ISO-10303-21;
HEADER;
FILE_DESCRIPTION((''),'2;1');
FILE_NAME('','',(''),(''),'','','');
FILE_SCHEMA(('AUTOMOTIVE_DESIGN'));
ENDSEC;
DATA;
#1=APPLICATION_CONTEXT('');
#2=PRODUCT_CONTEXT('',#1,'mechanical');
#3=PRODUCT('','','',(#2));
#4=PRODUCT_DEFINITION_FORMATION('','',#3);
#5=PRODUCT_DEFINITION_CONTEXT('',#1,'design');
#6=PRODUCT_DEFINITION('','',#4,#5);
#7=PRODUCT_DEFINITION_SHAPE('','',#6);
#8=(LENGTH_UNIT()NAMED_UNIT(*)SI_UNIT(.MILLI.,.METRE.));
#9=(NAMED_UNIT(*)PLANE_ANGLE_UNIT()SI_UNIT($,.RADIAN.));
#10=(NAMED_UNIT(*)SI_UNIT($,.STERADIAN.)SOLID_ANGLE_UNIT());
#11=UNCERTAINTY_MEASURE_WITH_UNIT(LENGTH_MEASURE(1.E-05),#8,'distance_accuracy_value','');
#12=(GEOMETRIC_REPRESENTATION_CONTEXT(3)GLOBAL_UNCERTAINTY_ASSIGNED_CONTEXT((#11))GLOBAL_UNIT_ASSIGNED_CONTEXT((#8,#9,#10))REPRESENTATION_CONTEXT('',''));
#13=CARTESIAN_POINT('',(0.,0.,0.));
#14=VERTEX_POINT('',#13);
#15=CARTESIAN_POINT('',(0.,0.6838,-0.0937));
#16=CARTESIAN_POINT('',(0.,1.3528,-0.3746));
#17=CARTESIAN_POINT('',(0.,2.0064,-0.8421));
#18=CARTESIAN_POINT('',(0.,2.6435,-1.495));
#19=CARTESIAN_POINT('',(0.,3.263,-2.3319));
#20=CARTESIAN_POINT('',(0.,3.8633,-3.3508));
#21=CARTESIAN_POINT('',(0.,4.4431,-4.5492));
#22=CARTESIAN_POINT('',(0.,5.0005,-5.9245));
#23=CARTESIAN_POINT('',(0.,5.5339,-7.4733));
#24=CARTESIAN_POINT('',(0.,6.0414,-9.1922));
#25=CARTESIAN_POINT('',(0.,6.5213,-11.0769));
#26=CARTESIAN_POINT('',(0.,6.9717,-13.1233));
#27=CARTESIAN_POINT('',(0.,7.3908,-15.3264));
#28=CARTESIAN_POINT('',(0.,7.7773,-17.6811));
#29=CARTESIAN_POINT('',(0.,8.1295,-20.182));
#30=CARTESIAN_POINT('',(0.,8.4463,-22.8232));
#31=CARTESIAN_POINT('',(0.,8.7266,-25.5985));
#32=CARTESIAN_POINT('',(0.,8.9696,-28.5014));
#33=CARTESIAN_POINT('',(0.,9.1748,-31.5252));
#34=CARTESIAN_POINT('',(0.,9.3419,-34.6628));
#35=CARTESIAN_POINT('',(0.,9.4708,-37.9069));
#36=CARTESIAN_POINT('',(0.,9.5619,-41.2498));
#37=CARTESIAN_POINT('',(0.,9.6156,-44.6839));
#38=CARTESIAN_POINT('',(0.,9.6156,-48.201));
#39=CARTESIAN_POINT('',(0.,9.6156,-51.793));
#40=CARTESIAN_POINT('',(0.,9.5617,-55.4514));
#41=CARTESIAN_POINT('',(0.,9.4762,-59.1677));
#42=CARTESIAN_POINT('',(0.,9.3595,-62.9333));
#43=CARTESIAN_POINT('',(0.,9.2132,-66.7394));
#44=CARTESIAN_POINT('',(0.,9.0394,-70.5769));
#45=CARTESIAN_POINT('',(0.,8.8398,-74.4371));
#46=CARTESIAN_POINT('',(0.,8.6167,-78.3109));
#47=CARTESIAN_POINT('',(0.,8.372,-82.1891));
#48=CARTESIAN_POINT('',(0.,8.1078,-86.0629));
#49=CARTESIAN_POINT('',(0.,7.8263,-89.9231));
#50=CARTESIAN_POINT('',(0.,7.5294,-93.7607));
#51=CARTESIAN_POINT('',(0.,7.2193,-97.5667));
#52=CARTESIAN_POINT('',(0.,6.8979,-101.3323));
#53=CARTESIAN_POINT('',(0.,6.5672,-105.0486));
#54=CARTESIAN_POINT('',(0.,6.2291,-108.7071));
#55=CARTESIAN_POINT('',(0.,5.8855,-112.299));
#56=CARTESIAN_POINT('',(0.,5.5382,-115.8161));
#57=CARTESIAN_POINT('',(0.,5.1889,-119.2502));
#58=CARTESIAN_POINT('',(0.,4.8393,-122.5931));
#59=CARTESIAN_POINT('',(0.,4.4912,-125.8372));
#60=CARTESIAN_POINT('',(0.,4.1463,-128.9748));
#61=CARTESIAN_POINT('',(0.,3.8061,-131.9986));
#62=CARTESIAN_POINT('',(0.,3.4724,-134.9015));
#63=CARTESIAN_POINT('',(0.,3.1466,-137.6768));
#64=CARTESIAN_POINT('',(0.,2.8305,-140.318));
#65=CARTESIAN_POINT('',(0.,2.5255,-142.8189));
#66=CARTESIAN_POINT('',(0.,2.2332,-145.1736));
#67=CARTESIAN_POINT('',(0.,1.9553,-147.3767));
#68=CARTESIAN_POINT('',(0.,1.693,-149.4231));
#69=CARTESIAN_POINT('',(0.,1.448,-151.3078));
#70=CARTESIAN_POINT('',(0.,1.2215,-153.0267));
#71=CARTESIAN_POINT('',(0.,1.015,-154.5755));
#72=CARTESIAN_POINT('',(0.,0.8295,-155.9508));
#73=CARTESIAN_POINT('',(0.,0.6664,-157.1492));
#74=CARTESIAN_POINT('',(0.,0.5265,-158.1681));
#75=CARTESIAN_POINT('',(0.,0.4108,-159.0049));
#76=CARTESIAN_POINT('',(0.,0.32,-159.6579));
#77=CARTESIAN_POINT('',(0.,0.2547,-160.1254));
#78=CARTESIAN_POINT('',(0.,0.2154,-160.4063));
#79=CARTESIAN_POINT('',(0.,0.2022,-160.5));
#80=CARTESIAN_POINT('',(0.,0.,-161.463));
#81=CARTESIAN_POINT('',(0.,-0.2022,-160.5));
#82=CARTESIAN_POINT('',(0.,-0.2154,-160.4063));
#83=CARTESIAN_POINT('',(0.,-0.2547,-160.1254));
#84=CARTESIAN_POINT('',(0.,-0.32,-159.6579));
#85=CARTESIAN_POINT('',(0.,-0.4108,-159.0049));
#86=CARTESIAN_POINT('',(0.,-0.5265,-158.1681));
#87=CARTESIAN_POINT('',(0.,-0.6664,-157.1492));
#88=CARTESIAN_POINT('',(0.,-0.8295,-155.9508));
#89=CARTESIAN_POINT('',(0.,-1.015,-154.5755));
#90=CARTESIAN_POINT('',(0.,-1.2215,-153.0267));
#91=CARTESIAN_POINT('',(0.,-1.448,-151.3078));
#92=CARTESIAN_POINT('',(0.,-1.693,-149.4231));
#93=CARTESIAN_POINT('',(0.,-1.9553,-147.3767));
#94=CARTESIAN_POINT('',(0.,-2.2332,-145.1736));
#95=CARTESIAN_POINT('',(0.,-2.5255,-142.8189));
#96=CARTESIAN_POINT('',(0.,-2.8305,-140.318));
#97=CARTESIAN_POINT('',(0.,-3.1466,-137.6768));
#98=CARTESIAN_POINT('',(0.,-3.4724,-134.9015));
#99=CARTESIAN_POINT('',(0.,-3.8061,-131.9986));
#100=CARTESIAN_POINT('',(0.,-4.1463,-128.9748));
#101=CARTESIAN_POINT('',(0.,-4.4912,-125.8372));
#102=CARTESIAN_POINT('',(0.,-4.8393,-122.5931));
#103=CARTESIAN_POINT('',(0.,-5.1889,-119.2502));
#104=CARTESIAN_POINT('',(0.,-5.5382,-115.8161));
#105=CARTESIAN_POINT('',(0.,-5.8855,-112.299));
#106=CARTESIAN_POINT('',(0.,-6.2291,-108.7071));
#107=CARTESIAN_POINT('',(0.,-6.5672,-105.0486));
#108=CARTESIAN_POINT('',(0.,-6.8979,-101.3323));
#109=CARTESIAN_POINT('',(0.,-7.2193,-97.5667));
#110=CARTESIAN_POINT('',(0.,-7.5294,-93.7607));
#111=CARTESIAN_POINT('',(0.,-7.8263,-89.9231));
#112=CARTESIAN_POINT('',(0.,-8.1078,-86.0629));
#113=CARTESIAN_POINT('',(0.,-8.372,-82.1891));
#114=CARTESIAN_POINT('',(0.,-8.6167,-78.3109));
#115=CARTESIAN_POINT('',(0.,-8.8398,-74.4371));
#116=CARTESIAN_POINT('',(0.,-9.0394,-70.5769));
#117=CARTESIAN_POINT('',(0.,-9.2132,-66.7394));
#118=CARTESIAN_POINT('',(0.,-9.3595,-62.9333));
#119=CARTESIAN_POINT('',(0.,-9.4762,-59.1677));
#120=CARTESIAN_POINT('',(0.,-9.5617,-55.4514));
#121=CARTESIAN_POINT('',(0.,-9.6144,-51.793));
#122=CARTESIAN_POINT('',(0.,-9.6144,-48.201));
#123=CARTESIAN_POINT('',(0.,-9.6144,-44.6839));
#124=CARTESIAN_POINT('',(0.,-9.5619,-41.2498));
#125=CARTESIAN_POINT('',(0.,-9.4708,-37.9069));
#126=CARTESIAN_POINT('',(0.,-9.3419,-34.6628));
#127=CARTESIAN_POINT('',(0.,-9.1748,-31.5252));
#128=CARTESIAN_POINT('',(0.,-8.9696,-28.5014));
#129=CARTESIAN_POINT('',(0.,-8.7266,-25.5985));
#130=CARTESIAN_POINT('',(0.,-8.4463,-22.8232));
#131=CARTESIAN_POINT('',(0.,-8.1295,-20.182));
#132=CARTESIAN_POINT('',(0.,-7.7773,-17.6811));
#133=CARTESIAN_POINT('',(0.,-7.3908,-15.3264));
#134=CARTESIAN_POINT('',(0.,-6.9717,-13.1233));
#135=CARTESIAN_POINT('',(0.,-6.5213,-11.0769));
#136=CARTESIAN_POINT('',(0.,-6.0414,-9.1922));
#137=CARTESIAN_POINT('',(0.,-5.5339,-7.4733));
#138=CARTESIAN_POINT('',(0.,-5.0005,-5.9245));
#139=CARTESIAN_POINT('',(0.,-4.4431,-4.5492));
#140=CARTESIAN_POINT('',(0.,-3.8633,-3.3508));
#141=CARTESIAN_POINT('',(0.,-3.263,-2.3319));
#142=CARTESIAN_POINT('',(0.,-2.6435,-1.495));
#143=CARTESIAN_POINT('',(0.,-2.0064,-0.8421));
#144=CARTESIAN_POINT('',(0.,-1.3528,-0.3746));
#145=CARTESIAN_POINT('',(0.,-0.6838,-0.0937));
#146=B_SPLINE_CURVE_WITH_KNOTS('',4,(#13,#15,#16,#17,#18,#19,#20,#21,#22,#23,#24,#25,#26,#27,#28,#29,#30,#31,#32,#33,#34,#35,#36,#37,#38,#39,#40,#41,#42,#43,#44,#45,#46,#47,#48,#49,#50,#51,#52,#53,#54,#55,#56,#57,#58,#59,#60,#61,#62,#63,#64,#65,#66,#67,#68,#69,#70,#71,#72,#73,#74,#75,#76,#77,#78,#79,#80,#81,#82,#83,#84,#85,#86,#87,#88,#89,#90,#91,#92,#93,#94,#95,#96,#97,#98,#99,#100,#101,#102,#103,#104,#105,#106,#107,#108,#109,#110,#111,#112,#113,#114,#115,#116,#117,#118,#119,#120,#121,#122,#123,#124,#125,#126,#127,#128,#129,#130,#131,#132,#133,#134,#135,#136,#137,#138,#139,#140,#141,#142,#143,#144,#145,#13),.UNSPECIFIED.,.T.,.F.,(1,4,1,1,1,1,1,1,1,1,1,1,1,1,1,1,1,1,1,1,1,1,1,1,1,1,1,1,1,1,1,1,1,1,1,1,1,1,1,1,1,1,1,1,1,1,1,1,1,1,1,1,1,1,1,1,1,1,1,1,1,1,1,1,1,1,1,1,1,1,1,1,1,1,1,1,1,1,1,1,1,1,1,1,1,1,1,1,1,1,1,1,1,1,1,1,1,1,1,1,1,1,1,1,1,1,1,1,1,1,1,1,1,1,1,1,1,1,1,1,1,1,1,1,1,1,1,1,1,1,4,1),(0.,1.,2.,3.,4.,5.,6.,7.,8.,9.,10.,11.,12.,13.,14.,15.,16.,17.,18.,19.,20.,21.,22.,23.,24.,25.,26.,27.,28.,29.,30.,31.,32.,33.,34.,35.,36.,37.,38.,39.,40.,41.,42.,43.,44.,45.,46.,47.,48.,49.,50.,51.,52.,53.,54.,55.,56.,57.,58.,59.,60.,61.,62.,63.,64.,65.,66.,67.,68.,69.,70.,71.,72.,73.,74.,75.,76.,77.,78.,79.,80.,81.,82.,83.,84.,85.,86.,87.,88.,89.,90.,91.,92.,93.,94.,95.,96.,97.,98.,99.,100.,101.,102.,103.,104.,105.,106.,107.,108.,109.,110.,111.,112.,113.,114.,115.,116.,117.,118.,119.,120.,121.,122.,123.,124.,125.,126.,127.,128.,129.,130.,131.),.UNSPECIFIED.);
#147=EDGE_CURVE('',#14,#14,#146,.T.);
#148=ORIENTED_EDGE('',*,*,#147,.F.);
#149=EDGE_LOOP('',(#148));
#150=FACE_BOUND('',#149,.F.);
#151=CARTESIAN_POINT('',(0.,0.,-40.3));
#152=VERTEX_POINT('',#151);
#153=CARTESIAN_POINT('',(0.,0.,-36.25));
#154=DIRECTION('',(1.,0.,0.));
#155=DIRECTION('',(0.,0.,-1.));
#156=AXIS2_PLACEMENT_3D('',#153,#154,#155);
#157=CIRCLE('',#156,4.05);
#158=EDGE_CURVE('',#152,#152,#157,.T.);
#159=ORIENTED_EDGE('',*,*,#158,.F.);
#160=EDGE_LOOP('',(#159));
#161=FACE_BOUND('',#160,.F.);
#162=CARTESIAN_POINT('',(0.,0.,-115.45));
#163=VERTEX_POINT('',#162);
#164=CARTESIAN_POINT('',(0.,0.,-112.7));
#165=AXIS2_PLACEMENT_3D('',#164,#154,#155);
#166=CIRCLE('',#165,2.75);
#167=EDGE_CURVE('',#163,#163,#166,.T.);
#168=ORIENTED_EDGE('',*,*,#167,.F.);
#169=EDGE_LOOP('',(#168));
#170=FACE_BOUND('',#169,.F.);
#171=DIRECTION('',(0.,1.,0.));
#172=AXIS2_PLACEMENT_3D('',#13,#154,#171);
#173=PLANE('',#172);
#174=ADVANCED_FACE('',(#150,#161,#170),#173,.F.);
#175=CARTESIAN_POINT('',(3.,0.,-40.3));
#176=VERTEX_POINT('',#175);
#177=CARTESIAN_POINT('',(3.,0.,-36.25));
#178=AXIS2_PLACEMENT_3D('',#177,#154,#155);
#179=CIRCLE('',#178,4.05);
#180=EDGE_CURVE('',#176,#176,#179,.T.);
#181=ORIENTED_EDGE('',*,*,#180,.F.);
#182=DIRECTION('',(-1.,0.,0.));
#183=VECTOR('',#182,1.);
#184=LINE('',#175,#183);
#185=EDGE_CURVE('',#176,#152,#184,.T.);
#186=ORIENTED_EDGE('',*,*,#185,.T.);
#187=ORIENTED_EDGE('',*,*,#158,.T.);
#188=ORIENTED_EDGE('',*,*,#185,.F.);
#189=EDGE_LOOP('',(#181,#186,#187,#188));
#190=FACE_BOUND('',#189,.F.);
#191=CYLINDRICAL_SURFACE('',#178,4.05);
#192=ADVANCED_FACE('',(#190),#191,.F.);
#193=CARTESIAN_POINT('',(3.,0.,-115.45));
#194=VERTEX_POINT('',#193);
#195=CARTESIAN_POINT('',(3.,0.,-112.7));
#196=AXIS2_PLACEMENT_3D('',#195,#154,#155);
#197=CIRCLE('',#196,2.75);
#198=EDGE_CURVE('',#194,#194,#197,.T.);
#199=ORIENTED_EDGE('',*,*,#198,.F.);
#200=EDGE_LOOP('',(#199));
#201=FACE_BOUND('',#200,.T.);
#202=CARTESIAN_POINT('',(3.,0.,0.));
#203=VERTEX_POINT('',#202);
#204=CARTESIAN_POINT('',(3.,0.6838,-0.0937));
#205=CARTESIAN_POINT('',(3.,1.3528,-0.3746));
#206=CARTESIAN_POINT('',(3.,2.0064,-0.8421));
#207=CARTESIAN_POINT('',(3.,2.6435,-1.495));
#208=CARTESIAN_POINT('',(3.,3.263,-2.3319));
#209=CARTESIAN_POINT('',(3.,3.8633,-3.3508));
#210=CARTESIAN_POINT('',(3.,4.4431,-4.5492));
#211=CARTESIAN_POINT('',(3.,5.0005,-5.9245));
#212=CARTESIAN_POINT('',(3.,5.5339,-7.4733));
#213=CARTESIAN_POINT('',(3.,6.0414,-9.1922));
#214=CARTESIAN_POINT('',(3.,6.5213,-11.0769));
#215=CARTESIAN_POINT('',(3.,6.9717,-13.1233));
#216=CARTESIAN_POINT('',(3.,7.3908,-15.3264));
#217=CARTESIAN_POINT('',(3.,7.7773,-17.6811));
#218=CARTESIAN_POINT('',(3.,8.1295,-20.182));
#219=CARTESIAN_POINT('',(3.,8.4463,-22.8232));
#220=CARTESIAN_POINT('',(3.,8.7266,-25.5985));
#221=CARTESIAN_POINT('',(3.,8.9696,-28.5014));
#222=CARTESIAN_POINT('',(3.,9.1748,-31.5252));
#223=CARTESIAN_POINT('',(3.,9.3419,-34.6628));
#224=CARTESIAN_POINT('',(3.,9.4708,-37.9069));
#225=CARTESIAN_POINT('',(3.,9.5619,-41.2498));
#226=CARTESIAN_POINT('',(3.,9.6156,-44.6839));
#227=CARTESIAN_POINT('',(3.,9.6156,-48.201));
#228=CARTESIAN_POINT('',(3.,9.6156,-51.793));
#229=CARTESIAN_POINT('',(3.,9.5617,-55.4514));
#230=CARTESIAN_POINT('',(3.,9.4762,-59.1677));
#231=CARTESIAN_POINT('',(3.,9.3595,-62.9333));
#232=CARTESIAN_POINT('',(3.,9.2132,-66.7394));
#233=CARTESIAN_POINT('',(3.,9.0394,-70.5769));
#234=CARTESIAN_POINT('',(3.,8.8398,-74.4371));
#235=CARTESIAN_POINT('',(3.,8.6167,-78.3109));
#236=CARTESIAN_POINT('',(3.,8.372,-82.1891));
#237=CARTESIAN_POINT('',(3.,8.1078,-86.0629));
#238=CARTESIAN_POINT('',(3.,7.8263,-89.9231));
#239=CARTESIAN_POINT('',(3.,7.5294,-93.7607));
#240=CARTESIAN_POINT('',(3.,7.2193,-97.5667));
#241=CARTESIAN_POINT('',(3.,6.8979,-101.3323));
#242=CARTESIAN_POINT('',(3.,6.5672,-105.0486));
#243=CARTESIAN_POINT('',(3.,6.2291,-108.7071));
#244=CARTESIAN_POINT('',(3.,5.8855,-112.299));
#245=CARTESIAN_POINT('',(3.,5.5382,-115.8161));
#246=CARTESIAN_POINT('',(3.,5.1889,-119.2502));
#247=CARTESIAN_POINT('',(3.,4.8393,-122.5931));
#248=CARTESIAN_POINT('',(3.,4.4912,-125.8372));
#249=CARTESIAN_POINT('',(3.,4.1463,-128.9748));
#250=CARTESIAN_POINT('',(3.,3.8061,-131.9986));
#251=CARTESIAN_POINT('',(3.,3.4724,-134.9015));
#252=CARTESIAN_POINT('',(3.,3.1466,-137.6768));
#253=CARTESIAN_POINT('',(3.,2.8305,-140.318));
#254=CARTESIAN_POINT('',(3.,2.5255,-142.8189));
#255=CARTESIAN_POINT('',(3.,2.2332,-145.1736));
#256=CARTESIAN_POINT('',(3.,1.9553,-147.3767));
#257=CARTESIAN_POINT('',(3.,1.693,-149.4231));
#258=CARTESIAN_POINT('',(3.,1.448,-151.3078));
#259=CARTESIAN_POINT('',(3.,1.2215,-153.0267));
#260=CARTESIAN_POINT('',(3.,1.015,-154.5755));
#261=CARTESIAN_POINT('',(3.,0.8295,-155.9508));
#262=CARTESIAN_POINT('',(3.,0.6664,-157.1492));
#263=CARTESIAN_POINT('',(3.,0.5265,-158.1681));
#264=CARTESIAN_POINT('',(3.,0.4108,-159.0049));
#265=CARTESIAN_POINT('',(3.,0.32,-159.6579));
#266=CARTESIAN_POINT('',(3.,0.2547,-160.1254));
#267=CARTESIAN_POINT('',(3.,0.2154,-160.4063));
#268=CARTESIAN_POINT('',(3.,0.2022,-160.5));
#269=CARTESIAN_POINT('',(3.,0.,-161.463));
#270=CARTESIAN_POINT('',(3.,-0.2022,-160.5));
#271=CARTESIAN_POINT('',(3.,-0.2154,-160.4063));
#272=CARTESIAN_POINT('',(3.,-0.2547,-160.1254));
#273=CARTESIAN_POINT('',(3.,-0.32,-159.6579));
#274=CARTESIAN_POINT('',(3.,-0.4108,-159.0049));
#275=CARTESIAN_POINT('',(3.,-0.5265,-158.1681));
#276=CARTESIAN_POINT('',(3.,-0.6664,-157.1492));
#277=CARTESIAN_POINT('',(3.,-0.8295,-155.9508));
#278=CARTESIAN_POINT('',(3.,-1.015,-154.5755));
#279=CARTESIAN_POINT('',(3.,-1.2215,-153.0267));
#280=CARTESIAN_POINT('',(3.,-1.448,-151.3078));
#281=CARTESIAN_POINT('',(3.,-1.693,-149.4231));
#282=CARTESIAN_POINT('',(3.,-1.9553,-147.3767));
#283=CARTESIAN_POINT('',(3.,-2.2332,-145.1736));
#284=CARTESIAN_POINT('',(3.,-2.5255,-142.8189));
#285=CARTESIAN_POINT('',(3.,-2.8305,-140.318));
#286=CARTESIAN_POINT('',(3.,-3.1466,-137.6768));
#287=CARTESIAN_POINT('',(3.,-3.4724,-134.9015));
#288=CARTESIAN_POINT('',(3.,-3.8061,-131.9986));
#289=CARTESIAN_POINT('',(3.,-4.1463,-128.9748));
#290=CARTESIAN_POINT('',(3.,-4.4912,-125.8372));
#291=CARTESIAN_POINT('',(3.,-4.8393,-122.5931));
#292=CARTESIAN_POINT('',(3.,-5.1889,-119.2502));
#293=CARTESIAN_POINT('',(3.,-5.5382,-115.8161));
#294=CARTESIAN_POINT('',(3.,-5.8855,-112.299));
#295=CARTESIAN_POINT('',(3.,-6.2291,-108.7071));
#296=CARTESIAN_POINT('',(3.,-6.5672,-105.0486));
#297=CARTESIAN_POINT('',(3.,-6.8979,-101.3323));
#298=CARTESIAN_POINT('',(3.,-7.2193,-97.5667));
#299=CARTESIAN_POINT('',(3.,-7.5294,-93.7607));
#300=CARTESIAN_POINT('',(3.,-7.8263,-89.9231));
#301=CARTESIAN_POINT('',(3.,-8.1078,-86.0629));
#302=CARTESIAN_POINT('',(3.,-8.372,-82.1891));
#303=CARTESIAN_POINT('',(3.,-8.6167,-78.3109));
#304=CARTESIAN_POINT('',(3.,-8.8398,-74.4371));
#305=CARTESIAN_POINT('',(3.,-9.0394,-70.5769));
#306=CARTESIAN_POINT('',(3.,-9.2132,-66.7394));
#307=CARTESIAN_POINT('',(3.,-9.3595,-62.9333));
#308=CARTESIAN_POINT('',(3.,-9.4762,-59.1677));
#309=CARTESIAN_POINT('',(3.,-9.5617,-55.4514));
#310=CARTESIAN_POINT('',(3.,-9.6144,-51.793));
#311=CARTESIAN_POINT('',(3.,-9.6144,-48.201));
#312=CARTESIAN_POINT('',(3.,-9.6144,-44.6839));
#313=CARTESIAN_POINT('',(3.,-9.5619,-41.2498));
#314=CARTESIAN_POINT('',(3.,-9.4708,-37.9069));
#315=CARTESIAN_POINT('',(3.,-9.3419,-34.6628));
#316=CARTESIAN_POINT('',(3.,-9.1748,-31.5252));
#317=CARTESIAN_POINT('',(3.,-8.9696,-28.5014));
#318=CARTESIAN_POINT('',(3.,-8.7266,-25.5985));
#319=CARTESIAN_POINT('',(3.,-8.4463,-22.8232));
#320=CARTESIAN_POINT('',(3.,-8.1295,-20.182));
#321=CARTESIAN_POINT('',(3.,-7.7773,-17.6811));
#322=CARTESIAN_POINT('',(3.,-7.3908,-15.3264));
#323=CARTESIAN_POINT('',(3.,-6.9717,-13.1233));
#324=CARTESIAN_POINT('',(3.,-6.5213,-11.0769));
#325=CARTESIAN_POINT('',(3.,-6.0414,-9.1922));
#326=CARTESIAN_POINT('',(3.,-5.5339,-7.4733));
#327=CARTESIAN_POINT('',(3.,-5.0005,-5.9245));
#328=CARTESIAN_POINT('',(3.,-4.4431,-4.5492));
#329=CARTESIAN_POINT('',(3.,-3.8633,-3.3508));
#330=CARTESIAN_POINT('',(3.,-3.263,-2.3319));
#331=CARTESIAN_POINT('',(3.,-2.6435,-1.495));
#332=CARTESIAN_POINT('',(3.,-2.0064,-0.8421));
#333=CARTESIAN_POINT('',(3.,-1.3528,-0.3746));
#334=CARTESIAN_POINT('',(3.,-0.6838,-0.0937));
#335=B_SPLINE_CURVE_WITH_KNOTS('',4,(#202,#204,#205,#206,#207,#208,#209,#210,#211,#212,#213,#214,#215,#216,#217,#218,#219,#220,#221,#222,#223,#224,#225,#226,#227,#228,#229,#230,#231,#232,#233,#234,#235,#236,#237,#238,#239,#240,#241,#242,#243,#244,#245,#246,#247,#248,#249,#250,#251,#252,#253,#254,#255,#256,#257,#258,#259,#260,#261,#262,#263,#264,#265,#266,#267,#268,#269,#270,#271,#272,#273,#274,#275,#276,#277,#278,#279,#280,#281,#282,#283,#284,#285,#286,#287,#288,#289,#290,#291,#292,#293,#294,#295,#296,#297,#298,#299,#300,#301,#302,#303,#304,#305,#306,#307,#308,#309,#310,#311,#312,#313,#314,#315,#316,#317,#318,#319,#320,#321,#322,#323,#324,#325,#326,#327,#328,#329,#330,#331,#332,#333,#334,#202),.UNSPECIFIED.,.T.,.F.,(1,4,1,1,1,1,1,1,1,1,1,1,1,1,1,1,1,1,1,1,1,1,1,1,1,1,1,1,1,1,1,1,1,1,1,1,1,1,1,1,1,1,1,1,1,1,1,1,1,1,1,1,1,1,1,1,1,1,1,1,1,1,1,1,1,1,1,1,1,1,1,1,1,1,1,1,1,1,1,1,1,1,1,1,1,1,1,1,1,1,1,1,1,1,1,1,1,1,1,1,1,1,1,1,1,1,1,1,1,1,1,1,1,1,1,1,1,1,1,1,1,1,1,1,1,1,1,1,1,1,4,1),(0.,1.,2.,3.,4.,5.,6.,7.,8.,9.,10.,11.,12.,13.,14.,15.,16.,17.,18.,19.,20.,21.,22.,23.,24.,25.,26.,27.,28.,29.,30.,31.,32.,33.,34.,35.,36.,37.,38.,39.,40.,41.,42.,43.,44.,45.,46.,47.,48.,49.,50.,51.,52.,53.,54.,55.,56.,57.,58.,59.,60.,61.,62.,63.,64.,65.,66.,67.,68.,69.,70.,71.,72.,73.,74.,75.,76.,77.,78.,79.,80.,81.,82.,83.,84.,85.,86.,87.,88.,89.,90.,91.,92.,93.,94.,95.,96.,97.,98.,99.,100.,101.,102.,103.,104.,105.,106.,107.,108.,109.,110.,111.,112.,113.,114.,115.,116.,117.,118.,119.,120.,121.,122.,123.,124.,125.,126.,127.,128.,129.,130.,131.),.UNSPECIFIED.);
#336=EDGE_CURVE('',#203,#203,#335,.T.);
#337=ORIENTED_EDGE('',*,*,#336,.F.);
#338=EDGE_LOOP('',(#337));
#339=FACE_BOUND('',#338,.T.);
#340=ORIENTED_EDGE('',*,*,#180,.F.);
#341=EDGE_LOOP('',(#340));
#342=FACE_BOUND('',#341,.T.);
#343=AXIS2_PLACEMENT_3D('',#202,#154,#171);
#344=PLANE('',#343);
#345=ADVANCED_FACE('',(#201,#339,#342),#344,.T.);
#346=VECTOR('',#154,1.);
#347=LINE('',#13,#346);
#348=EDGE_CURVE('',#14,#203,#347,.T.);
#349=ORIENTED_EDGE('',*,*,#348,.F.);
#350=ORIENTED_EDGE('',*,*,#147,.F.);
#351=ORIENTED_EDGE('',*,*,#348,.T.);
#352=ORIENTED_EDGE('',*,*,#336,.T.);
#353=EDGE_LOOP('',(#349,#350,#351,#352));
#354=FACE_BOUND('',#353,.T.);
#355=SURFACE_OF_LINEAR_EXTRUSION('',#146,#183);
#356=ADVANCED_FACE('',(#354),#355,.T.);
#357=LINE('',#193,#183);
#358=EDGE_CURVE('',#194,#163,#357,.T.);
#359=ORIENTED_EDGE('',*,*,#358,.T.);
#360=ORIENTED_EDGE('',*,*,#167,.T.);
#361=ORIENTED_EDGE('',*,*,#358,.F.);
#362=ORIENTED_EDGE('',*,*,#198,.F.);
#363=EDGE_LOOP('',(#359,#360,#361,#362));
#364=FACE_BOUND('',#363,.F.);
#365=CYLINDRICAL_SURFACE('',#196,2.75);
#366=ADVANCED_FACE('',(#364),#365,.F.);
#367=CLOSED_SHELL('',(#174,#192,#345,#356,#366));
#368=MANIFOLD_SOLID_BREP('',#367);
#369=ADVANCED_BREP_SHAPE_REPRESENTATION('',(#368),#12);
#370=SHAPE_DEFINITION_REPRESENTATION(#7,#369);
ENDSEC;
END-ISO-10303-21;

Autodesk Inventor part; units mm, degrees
ref_plane "YZ Plane" through (0, 0, 0) normal (1, 0, 0) x (0, 1, 0)
ref_plane "XZ Plane" through (0, 0, 0) normal (0, 1, 0) x (-1, 0, 0)
ref_plane "XY Plane" through (0, 0, 0) normal (0, 0, 1) x (1, 0, 0)
sketch "Sketch9" plane through (0, 0, 0) normal (1, 0, 0) x (0, 1, 0)
  line L0 (0, 0) -> (0.6838, -0.0937) construction
  line L1 (0.6838, -0.0937) -> (1.3528, -0.3746) construction
  line L2 (1.3528, -0.3746) -> (2.0064, -0.8421) construction
  line L3 (2.0064, -0.8421) -> (2.6435, -1.495) construction
  line L4 (2.6435, -1.495) -> (3.263, -2.3319) construction
  line L5 (3.263, -2.3319) -> (3.8633, -3.3508) construction
  line L6 (3.8633, -3.3508) -> (4.4431, -4.5492) construction
  line L7 (4.4431, -4.5492) -> (5.0005, -5.9245) construction
  line L8 (5.0005, -5.9245) -> (5.5339, -7.4733) construction
  line L9 (5.5339, -7.4733) -> (6.0414, -9.1922) construction
  line L10 (6.0414, -9.1922) -> (6.5213, -11.0769) construction
  line L11 (6.5213, -11.0769) -> (6.9717, -13.1233) construction
  line L12 (6.9717, -13.1233) -> (7.3908, -15.3264) construction
  line L13 (7.3908, -15.3264) -> (7.7773, -17.6811) construction
  line L14 (7.7773, -17.6811) -> (8.1295, -20.182) construction
  line L15 (8.1295, -20.182) -> (8.4463, -22.8232) construction
  line L16 (8.4463, -22.8232) -> (8.7266, -25.5985) construction
  line L17 (8.7266, -25.5985) -> (8.9696, -28.5014) construction
  line L18 (8.9696, -28.5014) -> (9.1748, -31.5252) construction
  line L19 (9.1748, -31.5252) -> (9.3419, -34.6628) construction
  line L20 (9.3419, -34.6628) -> (9.4708, -37.9069) construction
  line L21 (9.4708, -37.9069) -> (9.5619, -41.2498) construction
  line L22 (9.5619, -41.2498) -> (9.6156, -44.6839) construction
  line L23 (9.6156, -44.6839) -> (9.6156, -48.201) construction
  line L24 (9.6156, -48.201) -> (9.6156, -51.793) construction
  line L25 (9.6156, -51.793) -> (9.5617, -55.4514) construction
  line L26 (9.5617, -55.4514) -> (9.4762, -59.1677) construction
  line L27 (9.4762, -59.1677) -> (9.3595, -62.9333) construction
  line L28 (9.3595, -62.9333) -> (9.2132, -66.7394) construction
  line L29 (9.2132, -66.7394) -> (9.0394, -70.5769) construction
  line L30 (9.0394, -70.5769) -> (8.8398, -74.4371) construction
  line L31 (8.8398, -74.4371) -> (8.6167, -78.3109) construction
  line L32 (8.6167, -78.3109) -> (8.372, -82.1891) construction
  line L33 (8.372, -82.1891) -> (8.1078, -86.0629) construction
  line L34 (8.1078, -86.0629) -> (7.8263, -89.9231) construction
  line L35 (7.8263, -89.9231) -> (7.5294, -93.7607) construction
  line L36 (7.5294, -93.7607) -> (7.2193, -97.5667) construction
  line L37 (7.2193, -97.5667) -> (6.8979, -101.3323) construction
  line L38 (6.8979, -101.3323) -> (6.5672, -105.0486) construction
  line L39 (6.5672, -105.0486) -> (6.2291, -108.7071) construction
  line L40 (6.2291, -108.7071) -> (5.8855, -112.299) construction
  line L41 (5.8855, -112.299) -> (5.5382, -115.8161) construction
  line L42 (5.5382, -115.8161) -> (5.1889, -119.2502) construction
  line L43 (5.1889, -119.2502) -> (4.8393, -122.5931) construction
  line L44 (4.8393, -122.5931) -> (4.4912, -125.8372) construction
  line L45 (4.4912, -125.8372) -> (4.1463, -128.9748) construction
  line L46 (4.1463, -128.9748) -> (3.8061, -131.9986) construction
  line L47 (3.8061, -131.9986) -> (3.4724, -134.9015) construction
  line L48 (3.4724, -134.9015) -> (3.1466, -137.6768) construction
  line L49 (3.1466, -137.6768) -> (2.8305, -140.318) construction
  line L50 (2.8305, -140.318) -> (2.5255, -142.8189) construction
  line L51 (2.5255, -142.8189) -> (2.2332, -145.1736) construction
  line L52 (2.2332, -145.1736) -> (1.9553, -147.3767) construction
  line L53 (1.9553, -147.3767) -> (1.693, -149.4231) construction
  line L54 (1.693, -149.4231) -> (1.448, -151.3078) construction
  line L55 (1.448, -151.3078) -> (1.2215, -153.0267) construction
  line L56 (1.2215, -153.0267) -> (1.015, -154.5755) construction
  line L57 (1.015, -154.5755) -> (0.8295, -155.9508) construction
  line L58 (0.8295, -155.9508) -> (0.6664, -157.1492) construction
  line L59 (0.6664, -157.1492) -> (0.5265, -158.1681) construction
  line L60 (0.5265, -158.1681) -> (0.4108, -159.0049) construction
  line L61 (0.4108, -159.0049) -> (0.32, -159.6579) construction
  line L62 (0.32, -159.6579) -> (0.2547, -160.1254) construction
  line L63 (0.2547, -160.1254) -> (0.2154, -160.4063) construction
  line L64 (0.2154, -160.4063) -> (0.2022, -160.5) construction
  line L65 (0.2022, -160.5) -> (0, -161.463) construction
  line L66 (0, -161.463) -> (-0.2022, -160.5) construction
  line L67 (-0.2022, -160.5) -> (-0.2154, -160.4063) construction
  line L68 (-0.2154, -160.4063) -> (-0.2547, -160.1254) construction
  line L69 (-0.2547, -160.1254) -> (-0.32, -159.6579) construction
  line L70 (-0.32, -159.6579) -> (-0.4108, -159.0049) construction
  line L71 (-0.4108, -159.0049) -> (-0.5265, -158.1681) construction
  line L72 (-0.5265, -158.1681) -> (-0.6664, -157.1492) construction
  line L73 (-0.6664, -157.1492) -> (-0.8295, -155.9508) construction
  line L74 (-0.8295, -155.9508) -> (-1.015, -154.5755) construction
  line L75 (-1.015, -154.5755) -> (-1.2215, -153.0267) construction
  line L76 (-1.2215, -153.0267) -> (-1.448, -151.3078) construction
  line L77 (-1.448, -151.3078) -> (-1.693, -149.4231) construction
  line L78 (-1.693, -149.4231) -> (-1.9553, -147.3767) construction
  line L79 (-1.9553, -147.3767) -> (-2.2332, -145.1736) construction
  line L80 (-2.2332, -145.1736) -> (-2.5255, -142.8189) construction
  line L81 (-2.5255, -142.8189) -> (-2.8305, -140.318) construction
  line L82 (-2.8305, -140.318) -> (-3.1466, -137.6768) construction
  line L83 (-3.1466, -137.6768) -> (-3.4724, -134.9015) construction
  line L84 (-3.4724, -134.9015) -> (-3.8061, -131.9986) construction
  line L85 (-3.8061, -131.9986) -> (-4.1463, -128.9748) construction
  line L86 (-4.1463, -128.9748) -> (-4.4912, -125.8372) construction
  line L87 (-4.4912, -125.8372) -> (-4.8393, -122.5931) construction
  line L88 (-4.8393, -122.5931) -> (-5.1889, -119.2502) construction
  line L89 (-5.1889, -119.2502) -> (-5.5382, -115.8161) construction
  line L90 (-5.5382, -115.8161) -> (-5.8855, -112.299) construction
  line L91 (-5.8855, -112.299) -> (-6.2291, -108.7071) construction
  line L92 (-6.2291, -108.7071) -> (-6.5672, -105.0486) construction
  line L93 (-6.5672, -105.0486) -> (-6.8979, -101.3323) construction
  line L94 (-6.8979, -101.3323) -> (-7.2193, -97.5667) construction
  line L95 (-7.2193, -97.5667) -> (-7.5294, -93.7607) construction
  line L96 (-7.5294, -93.7607) -> (-7.8263, -89.9231) construction
  line L97 (-7.8263, -89.9231) -> (-8.1078, -86.0629) construction
  line L98 (-8.1078, -86.0629) -> (-8.372, -82.1891) construction
  line L99 (-8.372, -82.1891) -> (-8.6167, -78.3109) construction
  line L100 (-8.6167, -78.3109) -> (-8.8398, -74.4371) construction
  line L101 (-8.8398, -74.4371) -> (-9.0394, -70.5769) construction
  line L102 (-9.0394, -70.5769) -> (-9.2132, -66.7394) construction
  line L103 (-9.2132, -66.7394) -> (-9.3595, -62.9333) construction
  line L104 (-9.3595, -62.9333) -> (-9.4762, -59.1677) construction
  line L105 (-9.4762, -59.1677) -> (-9.5617, -55.4514) construction
  line L106 (-9.5617, -55.4514) -> (-9.6144, -51.793) construction
  line L107 (-9.6144, -51.793) -> (-9.6144, -48.201) construction
  line L108 (-9.6144, -48.201) -> (-9.6144, -44.6839) construction
  line L109 (-9.6144, -44.6839) -> (-9.5619, -41.2498) construction
  line L110 (-9.5619, -41.2498) -> (-9.4708, -37.9069) construction
  line L111 (-9.4708, -37.9069) -> (-9.3419, -34.6628) construction
  line L112 (-9.3419, -34.6628) -> (-9.1748, -31.5252) construction
  line L113 (-9.1748, -31.5252) -> (-8.9696, -28.5014) construction
  line L114 (-8.9696, -28.5014) -> (-8.7266, -25.5985) construction
  line L115 (-8.7266, -25.5985) -> (-8.4463, -22.8232) construction
  line L116 (-8.4463, -22.8232) -> (-8.1295, -20.182) construction
  line L117 (-8.1295, -20.182) -> (-7.7773, -17.6811) construction
  line L118 (-7.7773, -17.6811) -> (-7.3908, -15.3264) construction
  line L119 (-7.3908, -15.3264) -> (-6.9717, -13.1233) construction
  line L120 (-6.9717, -13.1233) -> (-6.5213, -11.0769) construction
  line L121 (-6.5213, -11.0769) -> (-6.0414, -9.1922) construction
  line L122 (-6.0414, -9.1922) -> (-5.5339, -7.4733) construction
  line L123 (-5.5339, -7.4733) -> (-5.0005, -5.9245) construction
  line L124 (-5.0005, -5.9245) -> (-4.4431, -4.5492) construction
  line L125 (-4.4431, -4.5492) -> (-3.8633, -3.3508) construction
  line L126 (-3.8633, -3.3508) -> (-3.263, -2.3319) construction
  line L127 (-3.263, -2.3319) -> (-2.6435, -1.495) construction
  line L128 (-2.6435, -1.495) -> (-2.0064, -0.8421) construction
  line L129 (-2.0064, -0.8421) -> (-1.3528, -0.3746) construction
  line L130 (-1.3528, -0.3746) -> (-0.6838, -0.0937) construction
  line L131 (-0.6838, -0.0937) -> (0, 0) construction
  spline S0 degree 4 poles (0, 0) (0.6838, -0.0937) (1.3528, -0.3746) (2.0064, -0.8421) (2.6435, -1.495) (3.263, -2.3319) (3.8633, -3.3508) (4.4431, -4.5492) (5.0005, -5.9245) (5.5339, -7.4733) (6.0414, -9.1922) (6.5213, -11.0769) (6.9717, -13.1233) (7.3908, -15.3264) (7.7773, -17.6811) (8.1295, -20.182) (8.4463, -22.8232) (8.7266, -25.5985) (8.9696, -28.5014) (9.1748, -31.5252) (9.3419, -34.6628) (9.4708, -37.9069) (9.5619, -41.2498) (9.6156, -44.6839) (9.6156, -48.201) (9.6156, -51.793) (9.5617, -55.4514) (9.4762, -59.1677) (9.3595, -62.9333) (9.2132, -66.7394) (9.0394, -70.5769) (8.8398, -74.4371) (8.6167, -78.3109) (8.372, -82.1891) (8.1078, -86.0629) (7.8263, -89.9231) (7.5294, -93.7607) (7.2193, -97.5667) (6.8979, -101.3323) (6.5672, -105.0486) (6.2291, -108.7071) (5.8855, -112.299) (5.5382, -115.8161) (5.1889, -119.2502) (4.8393, -122.5931) (4.4912, -125.8372) (4.1463, -128.9748) (3.8061, -131.9986) (3.4724, -134.9015) (3.1466, -137.6768) (2.8305, -140.318) (2.5255, -142.8189) (2.2332, -145.1736) (1.9553, -147.3767) (1.693, -149.4231) (1.448, -151.3078) (1.2215, -153.0267) (1.015, -154.5755) (0.8295, -155.9508) (0.6664, -157.1492) (0.5265, -158.1681) (0.4108, -159.0049) (0.32, -159.6579) (0.2547, -160.1254) (0.2154, -160.4063) (0.2022, -160.5) (0, -161.463) (-0.2022, -160.5) (-0.2154, -160.4063) (-0.2547, -160.1254) (-0.32, -159.6579) (-0.4108, -159.0049) (-0.5265, -158.1681) (-0.6664, -157.1492) (-0.8295, -155.9508) (-1.015, -154.5755) (-1.2215, -153.0267) (-1.448, -151.3078) (-1.693, -149.4231) (-1.9553, -147.3767) (-2.2332, -145.1736) (-2.5255, -142.8189) (-2.8305, -140.318) (-3.1466, -137.6768) (-3.4724, -134.9015) (-3.8061, -131.9986) (-4.1463, -128.9748) (-4.4912, -125.8372) (-4.8393, -122.5931) (-5.1889, -119.2502) (-5.5382, -115.8161) (-5.8855, -112.299) (-6.2291, -108.7071) (-6.5672, -105.0486) (-6.8979, -101.3323) (-7.2193, -97.5667) (-7.5294, -93.7607) (-7.8263, -89.9231) (-8.1078, -86.0629) (-8.372, -82.1891) (-8.6167, -78.3109) (-8.8398, -74.4371) (-9.0394, -70.5769) (-9.2132, -66.7394) (-9.3595, -62.9333) (-9.4762, -59.1677) (-9.5617, -55.4514) (-9.6144, -51.793) (-9.6144, -48.201) (-9.6144, -44.6839) (-9.5619, -41.2498) (-9.4708, -37.9069) (-9.3419, -34.6628) (-9.1748, -31.5252) (-8.9696, -28.5014) (-8.7266, -25.5985) (-8.4463, -22.8232) (-8.1295, -20.182) (-7.7773, -17.6811) (-7.3908, -15.3264) (-6.9717, -13.1233) (-6.5213, -11.0769) (-6.0414, -9.1922) (-5.5339, -7.4733) (-5.0005, -5.9245) (-4.4431, -4.5492) (-3.8633, -3.3508) (-3.263, -2.3319) (-2.6435, -1.495) (-2.0064, -0.8421) (-1.3528, -0.3746) (-0.6838, -0.0937) (0, 0) knots 1 1 1 1 1 2 3 4 5 6 7 8 9 10 11 12 13 14 15 16 17 18 19 20 21 22 23 24 25 26 27 28 29 30 31 32 33 34 35 36 37 38 39 40 41 42 43 44 45 46 47 48 49 50 51 52 53 54 55 56 57 58 59 60 61 62 63 64 65 66 67 68 69 70 71 72 73 74 75 76 77 78 79 80 81 82 83 84 85 86 87 88 89 90 91 92 93 94 95 96 97 98 99 100 101 102 103 104 105 106 107 108 109 110 111 112 113 114 115 116 117 118 119 120 121 122 123 124 125 126 127 128 129 130 130 130 130 130
extrude "Extrusion3" add sketch "Sketch9" along normal blind 3
sketch "Sketch10" plane through (3, 0, 0) normal (1, 0, 0) x (0, 0, -1)
  circle A0 centre (112.7, 0) radius 2.75
  circle A1 centre (36.25, 0) radius 4.05
  point P0 (0, 0)
  dimension "d87" = 5.5
  dimension "d88" = 8.1
  dimension "d89" = 36.25
  dimension "d90" = 112.7
extrude "Extrusion4" cut sketch "Sketch10" against normal blind 10
sketch "Sketch11" plane through (3, 0, 0) normal (1, 0, 0) x (0, 0, -1)
  point P0 (0, 0)
properties part number "6P-003" material "Poplar"
